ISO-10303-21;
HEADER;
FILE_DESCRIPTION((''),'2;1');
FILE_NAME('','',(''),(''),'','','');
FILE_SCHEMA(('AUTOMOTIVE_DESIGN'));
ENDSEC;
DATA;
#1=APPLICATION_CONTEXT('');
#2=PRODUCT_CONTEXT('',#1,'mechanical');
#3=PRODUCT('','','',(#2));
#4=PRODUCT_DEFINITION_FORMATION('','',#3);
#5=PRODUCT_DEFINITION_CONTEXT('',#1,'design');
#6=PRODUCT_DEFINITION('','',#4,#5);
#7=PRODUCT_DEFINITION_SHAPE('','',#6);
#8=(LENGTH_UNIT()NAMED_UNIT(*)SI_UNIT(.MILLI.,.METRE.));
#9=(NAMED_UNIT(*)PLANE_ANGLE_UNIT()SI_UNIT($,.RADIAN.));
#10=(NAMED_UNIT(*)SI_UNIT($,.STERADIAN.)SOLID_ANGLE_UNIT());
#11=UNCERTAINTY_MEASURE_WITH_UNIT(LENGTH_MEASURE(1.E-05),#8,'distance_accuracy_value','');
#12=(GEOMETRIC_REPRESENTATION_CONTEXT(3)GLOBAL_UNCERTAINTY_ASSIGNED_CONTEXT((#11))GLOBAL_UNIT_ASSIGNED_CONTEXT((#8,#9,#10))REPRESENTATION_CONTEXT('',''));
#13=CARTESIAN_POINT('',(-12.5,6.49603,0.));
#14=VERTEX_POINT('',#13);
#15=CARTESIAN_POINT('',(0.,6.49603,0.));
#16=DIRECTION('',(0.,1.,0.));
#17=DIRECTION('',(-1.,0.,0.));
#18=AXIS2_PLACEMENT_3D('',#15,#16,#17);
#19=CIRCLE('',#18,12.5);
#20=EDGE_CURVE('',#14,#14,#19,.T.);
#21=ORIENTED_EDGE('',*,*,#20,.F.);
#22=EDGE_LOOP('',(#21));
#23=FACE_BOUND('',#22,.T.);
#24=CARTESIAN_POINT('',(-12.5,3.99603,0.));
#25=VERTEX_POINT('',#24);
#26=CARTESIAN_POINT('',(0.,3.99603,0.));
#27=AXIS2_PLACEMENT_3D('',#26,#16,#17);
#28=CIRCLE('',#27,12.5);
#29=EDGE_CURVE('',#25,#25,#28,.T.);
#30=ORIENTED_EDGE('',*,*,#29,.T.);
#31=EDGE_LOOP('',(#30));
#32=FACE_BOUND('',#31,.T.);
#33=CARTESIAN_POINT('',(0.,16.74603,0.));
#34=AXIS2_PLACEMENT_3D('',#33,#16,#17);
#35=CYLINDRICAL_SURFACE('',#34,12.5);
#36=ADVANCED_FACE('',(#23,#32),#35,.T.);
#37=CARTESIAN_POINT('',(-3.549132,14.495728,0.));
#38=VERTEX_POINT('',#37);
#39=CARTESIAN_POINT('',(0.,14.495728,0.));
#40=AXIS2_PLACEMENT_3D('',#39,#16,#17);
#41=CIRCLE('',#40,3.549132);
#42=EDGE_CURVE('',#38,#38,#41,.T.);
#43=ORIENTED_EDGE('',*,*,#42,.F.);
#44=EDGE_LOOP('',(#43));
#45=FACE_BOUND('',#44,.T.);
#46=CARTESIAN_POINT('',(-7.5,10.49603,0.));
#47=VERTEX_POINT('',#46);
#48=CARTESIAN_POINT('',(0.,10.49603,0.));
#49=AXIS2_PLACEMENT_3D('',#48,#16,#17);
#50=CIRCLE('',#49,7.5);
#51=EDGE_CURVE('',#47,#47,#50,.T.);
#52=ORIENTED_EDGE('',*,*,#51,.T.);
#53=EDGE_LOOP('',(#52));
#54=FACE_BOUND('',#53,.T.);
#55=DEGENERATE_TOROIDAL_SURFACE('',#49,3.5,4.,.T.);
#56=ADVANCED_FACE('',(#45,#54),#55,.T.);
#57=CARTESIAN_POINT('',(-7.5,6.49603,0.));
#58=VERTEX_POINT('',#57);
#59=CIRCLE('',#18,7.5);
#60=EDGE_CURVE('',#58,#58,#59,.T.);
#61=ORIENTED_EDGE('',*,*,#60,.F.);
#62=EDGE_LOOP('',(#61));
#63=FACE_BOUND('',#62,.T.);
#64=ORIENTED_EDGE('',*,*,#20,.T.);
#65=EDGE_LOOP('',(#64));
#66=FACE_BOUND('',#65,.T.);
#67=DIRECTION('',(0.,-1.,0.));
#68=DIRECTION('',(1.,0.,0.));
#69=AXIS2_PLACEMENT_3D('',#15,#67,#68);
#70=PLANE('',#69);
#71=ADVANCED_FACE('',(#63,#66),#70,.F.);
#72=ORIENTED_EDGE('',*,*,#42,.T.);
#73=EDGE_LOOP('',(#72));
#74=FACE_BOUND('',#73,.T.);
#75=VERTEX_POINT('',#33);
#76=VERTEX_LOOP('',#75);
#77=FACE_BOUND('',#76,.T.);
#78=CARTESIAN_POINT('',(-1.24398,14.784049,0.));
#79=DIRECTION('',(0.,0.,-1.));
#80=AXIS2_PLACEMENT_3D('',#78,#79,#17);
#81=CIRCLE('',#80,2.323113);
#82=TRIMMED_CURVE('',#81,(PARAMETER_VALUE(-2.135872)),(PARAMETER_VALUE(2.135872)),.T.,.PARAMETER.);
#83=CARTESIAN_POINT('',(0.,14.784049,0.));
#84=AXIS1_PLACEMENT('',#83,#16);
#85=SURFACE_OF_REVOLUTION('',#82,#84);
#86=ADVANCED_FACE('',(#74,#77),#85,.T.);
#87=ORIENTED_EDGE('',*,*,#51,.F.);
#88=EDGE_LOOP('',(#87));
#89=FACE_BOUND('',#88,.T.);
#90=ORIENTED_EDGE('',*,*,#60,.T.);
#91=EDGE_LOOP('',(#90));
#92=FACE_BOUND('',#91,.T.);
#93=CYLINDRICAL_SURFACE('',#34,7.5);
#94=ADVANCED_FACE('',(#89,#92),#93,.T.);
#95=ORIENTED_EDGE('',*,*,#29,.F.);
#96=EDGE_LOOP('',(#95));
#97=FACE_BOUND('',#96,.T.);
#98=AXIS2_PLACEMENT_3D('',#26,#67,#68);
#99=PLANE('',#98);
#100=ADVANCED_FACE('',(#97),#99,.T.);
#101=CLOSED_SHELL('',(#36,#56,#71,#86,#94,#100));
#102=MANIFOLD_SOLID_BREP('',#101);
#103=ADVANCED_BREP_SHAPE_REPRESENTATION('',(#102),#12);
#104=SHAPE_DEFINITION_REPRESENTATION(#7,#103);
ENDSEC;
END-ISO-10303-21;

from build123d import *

# Parameters (mm, degrees)
SCALE1_SCALE = 0.5


# Read off the part's stored shape, not the designer's step: Revolve1
with BuildPart() as part:
    # Revolve1 outline → Revolve1 (revolve)
    with BuildSketch(Plane.XY):
        with BuildLine():
            Line((0, 0), (25, 0))
            Line((25, 0), (25, 5))
            Line((25, 5), (15, 5))
            Line((15, 5), (15, 13))
            ThreePointArc((15, 13), (12.691489866, 18.622005257), (7.098264224, 20.999396486))
            add(Edge.make_bspline(
                [(7.098264224, 20.999396486), (7.1249942, 21.213105179), (7.140321515, 21.436196265), (7.142328149, 21.668112759), (7.128922275, 21.907565675), (6.954502518, 23.302068173), (6.41751404, 24.626104851), (5.307497446, 25.751005993), (3.793838732, 26.222264661), (1.898778628, 26.222264691), (1.337144837, 26.128908483), (0.828896277, 25.959461976), (0.384824031, 25.743994916), (0, 25.5)],
                knots=[6.158754803, 6.158754803, 6.158754803, 6.158754803, 6.158754803, 6.158754803, 6.448356948, 6.448356948, 6.448356948, 6.448356948, 7.806359077, 7.806359077, 7.806359077, 7.806359077, 8.419057244, 8.419057244, 8.419057244, 8.419057244, 8.419057244, 8.419057244], degree=5, weights=[1, 1, 1.000040661, 1.000034686, 1, 1, 0.979567606, 0.973544962, 1, 1, 1.000378529, 1.000691771, 1, 1]))
            Line((0, 25.5), (0, 0))
        make_face()
    revolve(axis=Axis((0, 0, 0), (0, 1, 0)))


with BuildPart() as part_1:
    # Scale1: scaled about (0, 7.992059417, 0)
    add(part.part.scale(SCALE1_SCALE).moved(Location((0, 3.996029709, 0))))


solid = part_1.part
